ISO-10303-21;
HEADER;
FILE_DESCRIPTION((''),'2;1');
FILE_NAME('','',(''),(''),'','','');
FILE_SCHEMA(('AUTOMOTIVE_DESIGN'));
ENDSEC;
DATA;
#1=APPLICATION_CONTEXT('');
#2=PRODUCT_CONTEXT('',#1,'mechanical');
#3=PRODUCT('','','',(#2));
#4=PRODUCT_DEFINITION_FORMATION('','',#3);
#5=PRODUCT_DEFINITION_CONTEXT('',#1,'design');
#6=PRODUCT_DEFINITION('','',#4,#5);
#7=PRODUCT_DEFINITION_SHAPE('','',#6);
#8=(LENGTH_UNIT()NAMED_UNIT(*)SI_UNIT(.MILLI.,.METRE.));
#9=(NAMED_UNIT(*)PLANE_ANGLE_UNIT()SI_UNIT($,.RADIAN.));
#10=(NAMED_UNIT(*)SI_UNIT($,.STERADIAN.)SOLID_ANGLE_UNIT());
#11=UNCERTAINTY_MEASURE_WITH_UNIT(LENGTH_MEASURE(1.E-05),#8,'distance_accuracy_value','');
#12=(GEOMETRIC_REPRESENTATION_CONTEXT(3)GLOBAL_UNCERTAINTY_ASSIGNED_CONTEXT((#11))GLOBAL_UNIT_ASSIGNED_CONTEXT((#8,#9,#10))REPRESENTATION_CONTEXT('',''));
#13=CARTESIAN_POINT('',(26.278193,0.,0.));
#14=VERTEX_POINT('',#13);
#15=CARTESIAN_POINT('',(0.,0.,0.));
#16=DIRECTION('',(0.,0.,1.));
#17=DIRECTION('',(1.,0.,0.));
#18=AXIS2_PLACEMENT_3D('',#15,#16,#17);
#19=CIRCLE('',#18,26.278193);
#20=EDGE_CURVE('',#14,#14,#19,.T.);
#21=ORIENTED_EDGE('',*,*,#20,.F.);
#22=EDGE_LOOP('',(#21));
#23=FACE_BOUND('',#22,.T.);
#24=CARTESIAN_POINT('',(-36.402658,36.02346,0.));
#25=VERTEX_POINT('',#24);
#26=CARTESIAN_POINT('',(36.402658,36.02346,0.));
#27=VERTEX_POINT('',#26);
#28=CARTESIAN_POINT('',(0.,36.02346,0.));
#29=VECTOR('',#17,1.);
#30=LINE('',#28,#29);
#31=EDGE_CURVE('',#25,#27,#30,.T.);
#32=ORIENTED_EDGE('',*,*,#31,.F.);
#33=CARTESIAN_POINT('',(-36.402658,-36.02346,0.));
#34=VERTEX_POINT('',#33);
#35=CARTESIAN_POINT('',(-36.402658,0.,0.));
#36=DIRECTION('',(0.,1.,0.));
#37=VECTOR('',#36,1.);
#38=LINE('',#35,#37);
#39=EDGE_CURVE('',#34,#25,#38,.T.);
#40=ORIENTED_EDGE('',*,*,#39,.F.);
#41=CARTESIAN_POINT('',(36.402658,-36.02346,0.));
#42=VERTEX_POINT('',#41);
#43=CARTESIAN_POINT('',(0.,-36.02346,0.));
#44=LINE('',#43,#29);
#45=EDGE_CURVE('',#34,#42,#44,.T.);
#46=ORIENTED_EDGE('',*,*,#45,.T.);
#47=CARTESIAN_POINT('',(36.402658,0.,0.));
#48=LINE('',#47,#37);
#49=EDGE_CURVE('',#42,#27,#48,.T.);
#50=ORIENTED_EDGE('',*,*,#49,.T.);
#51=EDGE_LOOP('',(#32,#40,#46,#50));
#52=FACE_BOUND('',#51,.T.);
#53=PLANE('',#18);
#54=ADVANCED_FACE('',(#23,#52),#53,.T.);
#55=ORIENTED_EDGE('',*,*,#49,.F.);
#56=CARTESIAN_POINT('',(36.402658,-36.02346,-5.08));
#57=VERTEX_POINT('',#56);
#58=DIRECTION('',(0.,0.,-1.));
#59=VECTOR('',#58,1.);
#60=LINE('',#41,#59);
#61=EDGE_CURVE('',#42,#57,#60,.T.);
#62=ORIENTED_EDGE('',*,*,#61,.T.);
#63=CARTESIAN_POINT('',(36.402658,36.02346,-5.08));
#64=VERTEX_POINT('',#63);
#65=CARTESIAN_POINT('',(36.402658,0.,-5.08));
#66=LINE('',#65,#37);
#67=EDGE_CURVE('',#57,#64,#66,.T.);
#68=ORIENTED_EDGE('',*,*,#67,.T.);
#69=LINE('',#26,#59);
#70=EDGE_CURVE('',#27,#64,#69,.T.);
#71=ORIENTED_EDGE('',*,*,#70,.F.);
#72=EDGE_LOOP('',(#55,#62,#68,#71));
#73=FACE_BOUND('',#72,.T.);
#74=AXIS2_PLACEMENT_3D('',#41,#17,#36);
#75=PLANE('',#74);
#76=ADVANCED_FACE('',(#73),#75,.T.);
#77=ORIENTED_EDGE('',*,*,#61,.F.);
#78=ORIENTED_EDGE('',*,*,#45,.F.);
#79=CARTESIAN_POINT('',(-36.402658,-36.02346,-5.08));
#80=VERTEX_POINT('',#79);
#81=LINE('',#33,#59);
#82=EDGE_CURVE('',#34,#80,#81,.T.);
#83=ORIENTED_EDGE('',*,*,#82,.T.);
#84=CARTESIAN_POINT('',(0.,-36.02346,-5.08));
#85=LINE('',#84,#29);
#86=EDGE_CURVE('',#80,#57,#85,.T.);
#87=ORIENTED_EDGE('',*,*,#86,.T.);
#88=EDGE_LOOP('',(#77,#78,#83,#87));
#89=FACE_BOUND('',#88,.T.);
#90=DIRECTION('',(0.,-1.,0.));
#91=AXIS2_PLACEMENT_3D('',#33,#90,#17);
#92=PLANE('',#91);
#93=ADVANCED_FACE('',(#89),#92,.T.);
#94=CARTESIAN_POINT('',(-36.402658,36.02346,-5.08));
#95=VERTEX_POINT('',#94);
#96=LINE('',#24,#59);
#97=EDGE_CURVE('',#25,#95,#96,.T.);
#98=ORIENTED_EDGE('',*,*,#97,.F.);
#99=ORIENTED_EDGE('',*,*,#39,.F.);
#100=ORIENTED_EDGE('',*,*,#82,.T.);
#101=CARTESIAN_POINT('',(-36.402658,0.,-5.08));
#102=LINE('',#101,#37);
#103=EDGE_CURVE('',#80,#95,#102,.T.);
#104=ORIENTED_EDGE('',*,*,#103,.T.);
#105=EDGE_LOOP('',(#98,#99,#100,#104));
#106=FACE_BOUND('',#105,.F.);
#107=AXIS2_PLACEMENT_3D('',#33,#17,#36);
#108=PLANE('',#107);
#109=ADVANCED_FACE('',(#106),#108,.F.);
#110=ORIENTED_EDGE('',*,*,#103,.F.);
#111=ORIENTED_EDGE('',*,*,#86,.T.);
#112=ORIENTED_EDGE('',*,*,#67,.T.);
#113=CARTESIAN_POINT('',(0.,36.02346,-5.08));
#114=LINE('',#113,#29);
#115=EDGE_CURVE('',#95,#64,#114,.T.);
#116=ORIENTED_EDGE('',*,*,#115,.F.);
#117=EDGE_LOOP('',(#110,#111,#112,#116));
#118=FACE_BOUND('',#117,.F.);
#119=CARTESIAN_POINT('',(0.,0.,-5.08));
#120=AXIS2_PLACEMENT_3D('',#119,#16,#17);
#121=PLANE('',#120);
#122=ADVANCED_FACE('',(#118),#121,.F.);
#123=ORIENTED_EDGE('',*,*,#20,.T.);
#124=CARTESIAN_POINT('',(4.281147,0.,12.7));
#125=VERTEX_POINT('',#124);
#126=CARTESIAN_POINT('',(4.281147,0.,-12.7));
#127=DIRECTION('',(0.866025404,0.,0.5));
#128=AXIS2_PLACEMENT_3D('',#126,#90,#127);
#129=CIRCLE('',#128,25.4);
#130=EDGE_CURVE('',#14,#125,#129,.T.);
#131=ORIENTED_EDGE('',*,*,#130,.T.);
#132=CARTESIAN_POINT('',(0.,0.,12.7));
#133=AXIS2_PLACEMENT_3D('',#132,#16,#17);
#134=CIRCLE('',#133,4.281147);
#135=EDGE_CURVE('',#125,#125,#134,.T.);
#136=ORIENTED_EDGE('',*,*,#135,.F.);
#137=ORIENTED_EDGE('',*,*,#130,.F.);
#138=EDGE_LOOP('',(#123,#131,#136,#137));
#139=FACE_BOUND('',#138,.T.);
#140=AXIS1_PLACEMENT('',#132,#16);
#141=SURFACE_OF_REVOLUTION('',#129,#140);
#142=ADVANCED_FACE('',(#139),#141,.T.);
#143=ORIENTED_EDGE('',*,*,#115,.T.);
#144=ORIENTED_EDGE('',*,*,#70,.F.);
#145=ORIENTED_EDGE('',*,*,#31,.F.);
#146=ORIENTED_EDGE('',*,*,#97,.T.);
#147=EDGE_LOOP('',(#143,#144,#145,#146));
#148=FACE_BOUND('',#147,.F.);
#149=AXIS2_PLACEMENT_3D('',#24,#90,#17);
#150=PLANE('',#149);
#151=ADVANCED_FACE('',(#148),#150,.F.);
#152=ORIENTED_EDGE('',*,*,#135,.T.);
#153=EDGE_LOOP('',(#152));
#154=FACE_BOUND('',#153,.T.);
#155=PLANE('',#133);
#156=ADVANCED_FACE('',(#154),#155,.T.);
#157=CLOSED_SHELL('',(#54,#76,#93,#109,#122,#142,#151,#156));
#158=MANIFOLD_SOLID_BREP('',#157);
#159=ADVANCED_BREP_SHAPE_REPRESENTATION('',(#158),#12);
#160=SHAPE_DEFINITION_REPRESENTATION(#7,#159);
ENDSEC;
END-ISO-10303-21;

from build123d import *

# Parameters (mm, degrees)
F0_R     = 26.2781927152
F1_DEPTH = 12.7
F3_W     = 72.8053152561
F3_H     = 72.0469206572
F4_DEPTH = 5.08


# Not quite as in the source:
# - a fillet or chamfer that OpenCascade refuses, or shapes differently, is made with other operations: its cross-section is extruded or revolved along the edge and cut away or added


with BuildPart() as f1:
    # F0 (on Top) → F1 (new body)
    with BuildSketch(Plane.XY):
        Circle(F0_R)
    extrude(amount=F1_DEPTH)

    # F2: fillet of radius 25.4 on 1 edges, made by hand

    # F2_s1 → F2_t2 (revolve, cut)
    with BuildSketch(Plane.XZ):
        with BuildLine():
            ThreePointArc((26.2781927152, 0), (16.9811474591, 9.2970452561), (4.2811474591, 12.7))
            Line((4.2811474591, 12.7), (26.2781927152, 12.7))
            Line((26.2781927152, 12.7), (26.2781927152, 0))
        make_face()
    revolve(axis=Axis((0, 0, 12.7), (0, 0, 1)), mode=Mode.SUBTRACT)

    # F3 (on Top) → F4 (join)
    with BuildSketch(Plane.XY):
        Rectangle(F3_W, F3_H)
    extrude(amount=-F4_DEPTH)


solid = f1.part
